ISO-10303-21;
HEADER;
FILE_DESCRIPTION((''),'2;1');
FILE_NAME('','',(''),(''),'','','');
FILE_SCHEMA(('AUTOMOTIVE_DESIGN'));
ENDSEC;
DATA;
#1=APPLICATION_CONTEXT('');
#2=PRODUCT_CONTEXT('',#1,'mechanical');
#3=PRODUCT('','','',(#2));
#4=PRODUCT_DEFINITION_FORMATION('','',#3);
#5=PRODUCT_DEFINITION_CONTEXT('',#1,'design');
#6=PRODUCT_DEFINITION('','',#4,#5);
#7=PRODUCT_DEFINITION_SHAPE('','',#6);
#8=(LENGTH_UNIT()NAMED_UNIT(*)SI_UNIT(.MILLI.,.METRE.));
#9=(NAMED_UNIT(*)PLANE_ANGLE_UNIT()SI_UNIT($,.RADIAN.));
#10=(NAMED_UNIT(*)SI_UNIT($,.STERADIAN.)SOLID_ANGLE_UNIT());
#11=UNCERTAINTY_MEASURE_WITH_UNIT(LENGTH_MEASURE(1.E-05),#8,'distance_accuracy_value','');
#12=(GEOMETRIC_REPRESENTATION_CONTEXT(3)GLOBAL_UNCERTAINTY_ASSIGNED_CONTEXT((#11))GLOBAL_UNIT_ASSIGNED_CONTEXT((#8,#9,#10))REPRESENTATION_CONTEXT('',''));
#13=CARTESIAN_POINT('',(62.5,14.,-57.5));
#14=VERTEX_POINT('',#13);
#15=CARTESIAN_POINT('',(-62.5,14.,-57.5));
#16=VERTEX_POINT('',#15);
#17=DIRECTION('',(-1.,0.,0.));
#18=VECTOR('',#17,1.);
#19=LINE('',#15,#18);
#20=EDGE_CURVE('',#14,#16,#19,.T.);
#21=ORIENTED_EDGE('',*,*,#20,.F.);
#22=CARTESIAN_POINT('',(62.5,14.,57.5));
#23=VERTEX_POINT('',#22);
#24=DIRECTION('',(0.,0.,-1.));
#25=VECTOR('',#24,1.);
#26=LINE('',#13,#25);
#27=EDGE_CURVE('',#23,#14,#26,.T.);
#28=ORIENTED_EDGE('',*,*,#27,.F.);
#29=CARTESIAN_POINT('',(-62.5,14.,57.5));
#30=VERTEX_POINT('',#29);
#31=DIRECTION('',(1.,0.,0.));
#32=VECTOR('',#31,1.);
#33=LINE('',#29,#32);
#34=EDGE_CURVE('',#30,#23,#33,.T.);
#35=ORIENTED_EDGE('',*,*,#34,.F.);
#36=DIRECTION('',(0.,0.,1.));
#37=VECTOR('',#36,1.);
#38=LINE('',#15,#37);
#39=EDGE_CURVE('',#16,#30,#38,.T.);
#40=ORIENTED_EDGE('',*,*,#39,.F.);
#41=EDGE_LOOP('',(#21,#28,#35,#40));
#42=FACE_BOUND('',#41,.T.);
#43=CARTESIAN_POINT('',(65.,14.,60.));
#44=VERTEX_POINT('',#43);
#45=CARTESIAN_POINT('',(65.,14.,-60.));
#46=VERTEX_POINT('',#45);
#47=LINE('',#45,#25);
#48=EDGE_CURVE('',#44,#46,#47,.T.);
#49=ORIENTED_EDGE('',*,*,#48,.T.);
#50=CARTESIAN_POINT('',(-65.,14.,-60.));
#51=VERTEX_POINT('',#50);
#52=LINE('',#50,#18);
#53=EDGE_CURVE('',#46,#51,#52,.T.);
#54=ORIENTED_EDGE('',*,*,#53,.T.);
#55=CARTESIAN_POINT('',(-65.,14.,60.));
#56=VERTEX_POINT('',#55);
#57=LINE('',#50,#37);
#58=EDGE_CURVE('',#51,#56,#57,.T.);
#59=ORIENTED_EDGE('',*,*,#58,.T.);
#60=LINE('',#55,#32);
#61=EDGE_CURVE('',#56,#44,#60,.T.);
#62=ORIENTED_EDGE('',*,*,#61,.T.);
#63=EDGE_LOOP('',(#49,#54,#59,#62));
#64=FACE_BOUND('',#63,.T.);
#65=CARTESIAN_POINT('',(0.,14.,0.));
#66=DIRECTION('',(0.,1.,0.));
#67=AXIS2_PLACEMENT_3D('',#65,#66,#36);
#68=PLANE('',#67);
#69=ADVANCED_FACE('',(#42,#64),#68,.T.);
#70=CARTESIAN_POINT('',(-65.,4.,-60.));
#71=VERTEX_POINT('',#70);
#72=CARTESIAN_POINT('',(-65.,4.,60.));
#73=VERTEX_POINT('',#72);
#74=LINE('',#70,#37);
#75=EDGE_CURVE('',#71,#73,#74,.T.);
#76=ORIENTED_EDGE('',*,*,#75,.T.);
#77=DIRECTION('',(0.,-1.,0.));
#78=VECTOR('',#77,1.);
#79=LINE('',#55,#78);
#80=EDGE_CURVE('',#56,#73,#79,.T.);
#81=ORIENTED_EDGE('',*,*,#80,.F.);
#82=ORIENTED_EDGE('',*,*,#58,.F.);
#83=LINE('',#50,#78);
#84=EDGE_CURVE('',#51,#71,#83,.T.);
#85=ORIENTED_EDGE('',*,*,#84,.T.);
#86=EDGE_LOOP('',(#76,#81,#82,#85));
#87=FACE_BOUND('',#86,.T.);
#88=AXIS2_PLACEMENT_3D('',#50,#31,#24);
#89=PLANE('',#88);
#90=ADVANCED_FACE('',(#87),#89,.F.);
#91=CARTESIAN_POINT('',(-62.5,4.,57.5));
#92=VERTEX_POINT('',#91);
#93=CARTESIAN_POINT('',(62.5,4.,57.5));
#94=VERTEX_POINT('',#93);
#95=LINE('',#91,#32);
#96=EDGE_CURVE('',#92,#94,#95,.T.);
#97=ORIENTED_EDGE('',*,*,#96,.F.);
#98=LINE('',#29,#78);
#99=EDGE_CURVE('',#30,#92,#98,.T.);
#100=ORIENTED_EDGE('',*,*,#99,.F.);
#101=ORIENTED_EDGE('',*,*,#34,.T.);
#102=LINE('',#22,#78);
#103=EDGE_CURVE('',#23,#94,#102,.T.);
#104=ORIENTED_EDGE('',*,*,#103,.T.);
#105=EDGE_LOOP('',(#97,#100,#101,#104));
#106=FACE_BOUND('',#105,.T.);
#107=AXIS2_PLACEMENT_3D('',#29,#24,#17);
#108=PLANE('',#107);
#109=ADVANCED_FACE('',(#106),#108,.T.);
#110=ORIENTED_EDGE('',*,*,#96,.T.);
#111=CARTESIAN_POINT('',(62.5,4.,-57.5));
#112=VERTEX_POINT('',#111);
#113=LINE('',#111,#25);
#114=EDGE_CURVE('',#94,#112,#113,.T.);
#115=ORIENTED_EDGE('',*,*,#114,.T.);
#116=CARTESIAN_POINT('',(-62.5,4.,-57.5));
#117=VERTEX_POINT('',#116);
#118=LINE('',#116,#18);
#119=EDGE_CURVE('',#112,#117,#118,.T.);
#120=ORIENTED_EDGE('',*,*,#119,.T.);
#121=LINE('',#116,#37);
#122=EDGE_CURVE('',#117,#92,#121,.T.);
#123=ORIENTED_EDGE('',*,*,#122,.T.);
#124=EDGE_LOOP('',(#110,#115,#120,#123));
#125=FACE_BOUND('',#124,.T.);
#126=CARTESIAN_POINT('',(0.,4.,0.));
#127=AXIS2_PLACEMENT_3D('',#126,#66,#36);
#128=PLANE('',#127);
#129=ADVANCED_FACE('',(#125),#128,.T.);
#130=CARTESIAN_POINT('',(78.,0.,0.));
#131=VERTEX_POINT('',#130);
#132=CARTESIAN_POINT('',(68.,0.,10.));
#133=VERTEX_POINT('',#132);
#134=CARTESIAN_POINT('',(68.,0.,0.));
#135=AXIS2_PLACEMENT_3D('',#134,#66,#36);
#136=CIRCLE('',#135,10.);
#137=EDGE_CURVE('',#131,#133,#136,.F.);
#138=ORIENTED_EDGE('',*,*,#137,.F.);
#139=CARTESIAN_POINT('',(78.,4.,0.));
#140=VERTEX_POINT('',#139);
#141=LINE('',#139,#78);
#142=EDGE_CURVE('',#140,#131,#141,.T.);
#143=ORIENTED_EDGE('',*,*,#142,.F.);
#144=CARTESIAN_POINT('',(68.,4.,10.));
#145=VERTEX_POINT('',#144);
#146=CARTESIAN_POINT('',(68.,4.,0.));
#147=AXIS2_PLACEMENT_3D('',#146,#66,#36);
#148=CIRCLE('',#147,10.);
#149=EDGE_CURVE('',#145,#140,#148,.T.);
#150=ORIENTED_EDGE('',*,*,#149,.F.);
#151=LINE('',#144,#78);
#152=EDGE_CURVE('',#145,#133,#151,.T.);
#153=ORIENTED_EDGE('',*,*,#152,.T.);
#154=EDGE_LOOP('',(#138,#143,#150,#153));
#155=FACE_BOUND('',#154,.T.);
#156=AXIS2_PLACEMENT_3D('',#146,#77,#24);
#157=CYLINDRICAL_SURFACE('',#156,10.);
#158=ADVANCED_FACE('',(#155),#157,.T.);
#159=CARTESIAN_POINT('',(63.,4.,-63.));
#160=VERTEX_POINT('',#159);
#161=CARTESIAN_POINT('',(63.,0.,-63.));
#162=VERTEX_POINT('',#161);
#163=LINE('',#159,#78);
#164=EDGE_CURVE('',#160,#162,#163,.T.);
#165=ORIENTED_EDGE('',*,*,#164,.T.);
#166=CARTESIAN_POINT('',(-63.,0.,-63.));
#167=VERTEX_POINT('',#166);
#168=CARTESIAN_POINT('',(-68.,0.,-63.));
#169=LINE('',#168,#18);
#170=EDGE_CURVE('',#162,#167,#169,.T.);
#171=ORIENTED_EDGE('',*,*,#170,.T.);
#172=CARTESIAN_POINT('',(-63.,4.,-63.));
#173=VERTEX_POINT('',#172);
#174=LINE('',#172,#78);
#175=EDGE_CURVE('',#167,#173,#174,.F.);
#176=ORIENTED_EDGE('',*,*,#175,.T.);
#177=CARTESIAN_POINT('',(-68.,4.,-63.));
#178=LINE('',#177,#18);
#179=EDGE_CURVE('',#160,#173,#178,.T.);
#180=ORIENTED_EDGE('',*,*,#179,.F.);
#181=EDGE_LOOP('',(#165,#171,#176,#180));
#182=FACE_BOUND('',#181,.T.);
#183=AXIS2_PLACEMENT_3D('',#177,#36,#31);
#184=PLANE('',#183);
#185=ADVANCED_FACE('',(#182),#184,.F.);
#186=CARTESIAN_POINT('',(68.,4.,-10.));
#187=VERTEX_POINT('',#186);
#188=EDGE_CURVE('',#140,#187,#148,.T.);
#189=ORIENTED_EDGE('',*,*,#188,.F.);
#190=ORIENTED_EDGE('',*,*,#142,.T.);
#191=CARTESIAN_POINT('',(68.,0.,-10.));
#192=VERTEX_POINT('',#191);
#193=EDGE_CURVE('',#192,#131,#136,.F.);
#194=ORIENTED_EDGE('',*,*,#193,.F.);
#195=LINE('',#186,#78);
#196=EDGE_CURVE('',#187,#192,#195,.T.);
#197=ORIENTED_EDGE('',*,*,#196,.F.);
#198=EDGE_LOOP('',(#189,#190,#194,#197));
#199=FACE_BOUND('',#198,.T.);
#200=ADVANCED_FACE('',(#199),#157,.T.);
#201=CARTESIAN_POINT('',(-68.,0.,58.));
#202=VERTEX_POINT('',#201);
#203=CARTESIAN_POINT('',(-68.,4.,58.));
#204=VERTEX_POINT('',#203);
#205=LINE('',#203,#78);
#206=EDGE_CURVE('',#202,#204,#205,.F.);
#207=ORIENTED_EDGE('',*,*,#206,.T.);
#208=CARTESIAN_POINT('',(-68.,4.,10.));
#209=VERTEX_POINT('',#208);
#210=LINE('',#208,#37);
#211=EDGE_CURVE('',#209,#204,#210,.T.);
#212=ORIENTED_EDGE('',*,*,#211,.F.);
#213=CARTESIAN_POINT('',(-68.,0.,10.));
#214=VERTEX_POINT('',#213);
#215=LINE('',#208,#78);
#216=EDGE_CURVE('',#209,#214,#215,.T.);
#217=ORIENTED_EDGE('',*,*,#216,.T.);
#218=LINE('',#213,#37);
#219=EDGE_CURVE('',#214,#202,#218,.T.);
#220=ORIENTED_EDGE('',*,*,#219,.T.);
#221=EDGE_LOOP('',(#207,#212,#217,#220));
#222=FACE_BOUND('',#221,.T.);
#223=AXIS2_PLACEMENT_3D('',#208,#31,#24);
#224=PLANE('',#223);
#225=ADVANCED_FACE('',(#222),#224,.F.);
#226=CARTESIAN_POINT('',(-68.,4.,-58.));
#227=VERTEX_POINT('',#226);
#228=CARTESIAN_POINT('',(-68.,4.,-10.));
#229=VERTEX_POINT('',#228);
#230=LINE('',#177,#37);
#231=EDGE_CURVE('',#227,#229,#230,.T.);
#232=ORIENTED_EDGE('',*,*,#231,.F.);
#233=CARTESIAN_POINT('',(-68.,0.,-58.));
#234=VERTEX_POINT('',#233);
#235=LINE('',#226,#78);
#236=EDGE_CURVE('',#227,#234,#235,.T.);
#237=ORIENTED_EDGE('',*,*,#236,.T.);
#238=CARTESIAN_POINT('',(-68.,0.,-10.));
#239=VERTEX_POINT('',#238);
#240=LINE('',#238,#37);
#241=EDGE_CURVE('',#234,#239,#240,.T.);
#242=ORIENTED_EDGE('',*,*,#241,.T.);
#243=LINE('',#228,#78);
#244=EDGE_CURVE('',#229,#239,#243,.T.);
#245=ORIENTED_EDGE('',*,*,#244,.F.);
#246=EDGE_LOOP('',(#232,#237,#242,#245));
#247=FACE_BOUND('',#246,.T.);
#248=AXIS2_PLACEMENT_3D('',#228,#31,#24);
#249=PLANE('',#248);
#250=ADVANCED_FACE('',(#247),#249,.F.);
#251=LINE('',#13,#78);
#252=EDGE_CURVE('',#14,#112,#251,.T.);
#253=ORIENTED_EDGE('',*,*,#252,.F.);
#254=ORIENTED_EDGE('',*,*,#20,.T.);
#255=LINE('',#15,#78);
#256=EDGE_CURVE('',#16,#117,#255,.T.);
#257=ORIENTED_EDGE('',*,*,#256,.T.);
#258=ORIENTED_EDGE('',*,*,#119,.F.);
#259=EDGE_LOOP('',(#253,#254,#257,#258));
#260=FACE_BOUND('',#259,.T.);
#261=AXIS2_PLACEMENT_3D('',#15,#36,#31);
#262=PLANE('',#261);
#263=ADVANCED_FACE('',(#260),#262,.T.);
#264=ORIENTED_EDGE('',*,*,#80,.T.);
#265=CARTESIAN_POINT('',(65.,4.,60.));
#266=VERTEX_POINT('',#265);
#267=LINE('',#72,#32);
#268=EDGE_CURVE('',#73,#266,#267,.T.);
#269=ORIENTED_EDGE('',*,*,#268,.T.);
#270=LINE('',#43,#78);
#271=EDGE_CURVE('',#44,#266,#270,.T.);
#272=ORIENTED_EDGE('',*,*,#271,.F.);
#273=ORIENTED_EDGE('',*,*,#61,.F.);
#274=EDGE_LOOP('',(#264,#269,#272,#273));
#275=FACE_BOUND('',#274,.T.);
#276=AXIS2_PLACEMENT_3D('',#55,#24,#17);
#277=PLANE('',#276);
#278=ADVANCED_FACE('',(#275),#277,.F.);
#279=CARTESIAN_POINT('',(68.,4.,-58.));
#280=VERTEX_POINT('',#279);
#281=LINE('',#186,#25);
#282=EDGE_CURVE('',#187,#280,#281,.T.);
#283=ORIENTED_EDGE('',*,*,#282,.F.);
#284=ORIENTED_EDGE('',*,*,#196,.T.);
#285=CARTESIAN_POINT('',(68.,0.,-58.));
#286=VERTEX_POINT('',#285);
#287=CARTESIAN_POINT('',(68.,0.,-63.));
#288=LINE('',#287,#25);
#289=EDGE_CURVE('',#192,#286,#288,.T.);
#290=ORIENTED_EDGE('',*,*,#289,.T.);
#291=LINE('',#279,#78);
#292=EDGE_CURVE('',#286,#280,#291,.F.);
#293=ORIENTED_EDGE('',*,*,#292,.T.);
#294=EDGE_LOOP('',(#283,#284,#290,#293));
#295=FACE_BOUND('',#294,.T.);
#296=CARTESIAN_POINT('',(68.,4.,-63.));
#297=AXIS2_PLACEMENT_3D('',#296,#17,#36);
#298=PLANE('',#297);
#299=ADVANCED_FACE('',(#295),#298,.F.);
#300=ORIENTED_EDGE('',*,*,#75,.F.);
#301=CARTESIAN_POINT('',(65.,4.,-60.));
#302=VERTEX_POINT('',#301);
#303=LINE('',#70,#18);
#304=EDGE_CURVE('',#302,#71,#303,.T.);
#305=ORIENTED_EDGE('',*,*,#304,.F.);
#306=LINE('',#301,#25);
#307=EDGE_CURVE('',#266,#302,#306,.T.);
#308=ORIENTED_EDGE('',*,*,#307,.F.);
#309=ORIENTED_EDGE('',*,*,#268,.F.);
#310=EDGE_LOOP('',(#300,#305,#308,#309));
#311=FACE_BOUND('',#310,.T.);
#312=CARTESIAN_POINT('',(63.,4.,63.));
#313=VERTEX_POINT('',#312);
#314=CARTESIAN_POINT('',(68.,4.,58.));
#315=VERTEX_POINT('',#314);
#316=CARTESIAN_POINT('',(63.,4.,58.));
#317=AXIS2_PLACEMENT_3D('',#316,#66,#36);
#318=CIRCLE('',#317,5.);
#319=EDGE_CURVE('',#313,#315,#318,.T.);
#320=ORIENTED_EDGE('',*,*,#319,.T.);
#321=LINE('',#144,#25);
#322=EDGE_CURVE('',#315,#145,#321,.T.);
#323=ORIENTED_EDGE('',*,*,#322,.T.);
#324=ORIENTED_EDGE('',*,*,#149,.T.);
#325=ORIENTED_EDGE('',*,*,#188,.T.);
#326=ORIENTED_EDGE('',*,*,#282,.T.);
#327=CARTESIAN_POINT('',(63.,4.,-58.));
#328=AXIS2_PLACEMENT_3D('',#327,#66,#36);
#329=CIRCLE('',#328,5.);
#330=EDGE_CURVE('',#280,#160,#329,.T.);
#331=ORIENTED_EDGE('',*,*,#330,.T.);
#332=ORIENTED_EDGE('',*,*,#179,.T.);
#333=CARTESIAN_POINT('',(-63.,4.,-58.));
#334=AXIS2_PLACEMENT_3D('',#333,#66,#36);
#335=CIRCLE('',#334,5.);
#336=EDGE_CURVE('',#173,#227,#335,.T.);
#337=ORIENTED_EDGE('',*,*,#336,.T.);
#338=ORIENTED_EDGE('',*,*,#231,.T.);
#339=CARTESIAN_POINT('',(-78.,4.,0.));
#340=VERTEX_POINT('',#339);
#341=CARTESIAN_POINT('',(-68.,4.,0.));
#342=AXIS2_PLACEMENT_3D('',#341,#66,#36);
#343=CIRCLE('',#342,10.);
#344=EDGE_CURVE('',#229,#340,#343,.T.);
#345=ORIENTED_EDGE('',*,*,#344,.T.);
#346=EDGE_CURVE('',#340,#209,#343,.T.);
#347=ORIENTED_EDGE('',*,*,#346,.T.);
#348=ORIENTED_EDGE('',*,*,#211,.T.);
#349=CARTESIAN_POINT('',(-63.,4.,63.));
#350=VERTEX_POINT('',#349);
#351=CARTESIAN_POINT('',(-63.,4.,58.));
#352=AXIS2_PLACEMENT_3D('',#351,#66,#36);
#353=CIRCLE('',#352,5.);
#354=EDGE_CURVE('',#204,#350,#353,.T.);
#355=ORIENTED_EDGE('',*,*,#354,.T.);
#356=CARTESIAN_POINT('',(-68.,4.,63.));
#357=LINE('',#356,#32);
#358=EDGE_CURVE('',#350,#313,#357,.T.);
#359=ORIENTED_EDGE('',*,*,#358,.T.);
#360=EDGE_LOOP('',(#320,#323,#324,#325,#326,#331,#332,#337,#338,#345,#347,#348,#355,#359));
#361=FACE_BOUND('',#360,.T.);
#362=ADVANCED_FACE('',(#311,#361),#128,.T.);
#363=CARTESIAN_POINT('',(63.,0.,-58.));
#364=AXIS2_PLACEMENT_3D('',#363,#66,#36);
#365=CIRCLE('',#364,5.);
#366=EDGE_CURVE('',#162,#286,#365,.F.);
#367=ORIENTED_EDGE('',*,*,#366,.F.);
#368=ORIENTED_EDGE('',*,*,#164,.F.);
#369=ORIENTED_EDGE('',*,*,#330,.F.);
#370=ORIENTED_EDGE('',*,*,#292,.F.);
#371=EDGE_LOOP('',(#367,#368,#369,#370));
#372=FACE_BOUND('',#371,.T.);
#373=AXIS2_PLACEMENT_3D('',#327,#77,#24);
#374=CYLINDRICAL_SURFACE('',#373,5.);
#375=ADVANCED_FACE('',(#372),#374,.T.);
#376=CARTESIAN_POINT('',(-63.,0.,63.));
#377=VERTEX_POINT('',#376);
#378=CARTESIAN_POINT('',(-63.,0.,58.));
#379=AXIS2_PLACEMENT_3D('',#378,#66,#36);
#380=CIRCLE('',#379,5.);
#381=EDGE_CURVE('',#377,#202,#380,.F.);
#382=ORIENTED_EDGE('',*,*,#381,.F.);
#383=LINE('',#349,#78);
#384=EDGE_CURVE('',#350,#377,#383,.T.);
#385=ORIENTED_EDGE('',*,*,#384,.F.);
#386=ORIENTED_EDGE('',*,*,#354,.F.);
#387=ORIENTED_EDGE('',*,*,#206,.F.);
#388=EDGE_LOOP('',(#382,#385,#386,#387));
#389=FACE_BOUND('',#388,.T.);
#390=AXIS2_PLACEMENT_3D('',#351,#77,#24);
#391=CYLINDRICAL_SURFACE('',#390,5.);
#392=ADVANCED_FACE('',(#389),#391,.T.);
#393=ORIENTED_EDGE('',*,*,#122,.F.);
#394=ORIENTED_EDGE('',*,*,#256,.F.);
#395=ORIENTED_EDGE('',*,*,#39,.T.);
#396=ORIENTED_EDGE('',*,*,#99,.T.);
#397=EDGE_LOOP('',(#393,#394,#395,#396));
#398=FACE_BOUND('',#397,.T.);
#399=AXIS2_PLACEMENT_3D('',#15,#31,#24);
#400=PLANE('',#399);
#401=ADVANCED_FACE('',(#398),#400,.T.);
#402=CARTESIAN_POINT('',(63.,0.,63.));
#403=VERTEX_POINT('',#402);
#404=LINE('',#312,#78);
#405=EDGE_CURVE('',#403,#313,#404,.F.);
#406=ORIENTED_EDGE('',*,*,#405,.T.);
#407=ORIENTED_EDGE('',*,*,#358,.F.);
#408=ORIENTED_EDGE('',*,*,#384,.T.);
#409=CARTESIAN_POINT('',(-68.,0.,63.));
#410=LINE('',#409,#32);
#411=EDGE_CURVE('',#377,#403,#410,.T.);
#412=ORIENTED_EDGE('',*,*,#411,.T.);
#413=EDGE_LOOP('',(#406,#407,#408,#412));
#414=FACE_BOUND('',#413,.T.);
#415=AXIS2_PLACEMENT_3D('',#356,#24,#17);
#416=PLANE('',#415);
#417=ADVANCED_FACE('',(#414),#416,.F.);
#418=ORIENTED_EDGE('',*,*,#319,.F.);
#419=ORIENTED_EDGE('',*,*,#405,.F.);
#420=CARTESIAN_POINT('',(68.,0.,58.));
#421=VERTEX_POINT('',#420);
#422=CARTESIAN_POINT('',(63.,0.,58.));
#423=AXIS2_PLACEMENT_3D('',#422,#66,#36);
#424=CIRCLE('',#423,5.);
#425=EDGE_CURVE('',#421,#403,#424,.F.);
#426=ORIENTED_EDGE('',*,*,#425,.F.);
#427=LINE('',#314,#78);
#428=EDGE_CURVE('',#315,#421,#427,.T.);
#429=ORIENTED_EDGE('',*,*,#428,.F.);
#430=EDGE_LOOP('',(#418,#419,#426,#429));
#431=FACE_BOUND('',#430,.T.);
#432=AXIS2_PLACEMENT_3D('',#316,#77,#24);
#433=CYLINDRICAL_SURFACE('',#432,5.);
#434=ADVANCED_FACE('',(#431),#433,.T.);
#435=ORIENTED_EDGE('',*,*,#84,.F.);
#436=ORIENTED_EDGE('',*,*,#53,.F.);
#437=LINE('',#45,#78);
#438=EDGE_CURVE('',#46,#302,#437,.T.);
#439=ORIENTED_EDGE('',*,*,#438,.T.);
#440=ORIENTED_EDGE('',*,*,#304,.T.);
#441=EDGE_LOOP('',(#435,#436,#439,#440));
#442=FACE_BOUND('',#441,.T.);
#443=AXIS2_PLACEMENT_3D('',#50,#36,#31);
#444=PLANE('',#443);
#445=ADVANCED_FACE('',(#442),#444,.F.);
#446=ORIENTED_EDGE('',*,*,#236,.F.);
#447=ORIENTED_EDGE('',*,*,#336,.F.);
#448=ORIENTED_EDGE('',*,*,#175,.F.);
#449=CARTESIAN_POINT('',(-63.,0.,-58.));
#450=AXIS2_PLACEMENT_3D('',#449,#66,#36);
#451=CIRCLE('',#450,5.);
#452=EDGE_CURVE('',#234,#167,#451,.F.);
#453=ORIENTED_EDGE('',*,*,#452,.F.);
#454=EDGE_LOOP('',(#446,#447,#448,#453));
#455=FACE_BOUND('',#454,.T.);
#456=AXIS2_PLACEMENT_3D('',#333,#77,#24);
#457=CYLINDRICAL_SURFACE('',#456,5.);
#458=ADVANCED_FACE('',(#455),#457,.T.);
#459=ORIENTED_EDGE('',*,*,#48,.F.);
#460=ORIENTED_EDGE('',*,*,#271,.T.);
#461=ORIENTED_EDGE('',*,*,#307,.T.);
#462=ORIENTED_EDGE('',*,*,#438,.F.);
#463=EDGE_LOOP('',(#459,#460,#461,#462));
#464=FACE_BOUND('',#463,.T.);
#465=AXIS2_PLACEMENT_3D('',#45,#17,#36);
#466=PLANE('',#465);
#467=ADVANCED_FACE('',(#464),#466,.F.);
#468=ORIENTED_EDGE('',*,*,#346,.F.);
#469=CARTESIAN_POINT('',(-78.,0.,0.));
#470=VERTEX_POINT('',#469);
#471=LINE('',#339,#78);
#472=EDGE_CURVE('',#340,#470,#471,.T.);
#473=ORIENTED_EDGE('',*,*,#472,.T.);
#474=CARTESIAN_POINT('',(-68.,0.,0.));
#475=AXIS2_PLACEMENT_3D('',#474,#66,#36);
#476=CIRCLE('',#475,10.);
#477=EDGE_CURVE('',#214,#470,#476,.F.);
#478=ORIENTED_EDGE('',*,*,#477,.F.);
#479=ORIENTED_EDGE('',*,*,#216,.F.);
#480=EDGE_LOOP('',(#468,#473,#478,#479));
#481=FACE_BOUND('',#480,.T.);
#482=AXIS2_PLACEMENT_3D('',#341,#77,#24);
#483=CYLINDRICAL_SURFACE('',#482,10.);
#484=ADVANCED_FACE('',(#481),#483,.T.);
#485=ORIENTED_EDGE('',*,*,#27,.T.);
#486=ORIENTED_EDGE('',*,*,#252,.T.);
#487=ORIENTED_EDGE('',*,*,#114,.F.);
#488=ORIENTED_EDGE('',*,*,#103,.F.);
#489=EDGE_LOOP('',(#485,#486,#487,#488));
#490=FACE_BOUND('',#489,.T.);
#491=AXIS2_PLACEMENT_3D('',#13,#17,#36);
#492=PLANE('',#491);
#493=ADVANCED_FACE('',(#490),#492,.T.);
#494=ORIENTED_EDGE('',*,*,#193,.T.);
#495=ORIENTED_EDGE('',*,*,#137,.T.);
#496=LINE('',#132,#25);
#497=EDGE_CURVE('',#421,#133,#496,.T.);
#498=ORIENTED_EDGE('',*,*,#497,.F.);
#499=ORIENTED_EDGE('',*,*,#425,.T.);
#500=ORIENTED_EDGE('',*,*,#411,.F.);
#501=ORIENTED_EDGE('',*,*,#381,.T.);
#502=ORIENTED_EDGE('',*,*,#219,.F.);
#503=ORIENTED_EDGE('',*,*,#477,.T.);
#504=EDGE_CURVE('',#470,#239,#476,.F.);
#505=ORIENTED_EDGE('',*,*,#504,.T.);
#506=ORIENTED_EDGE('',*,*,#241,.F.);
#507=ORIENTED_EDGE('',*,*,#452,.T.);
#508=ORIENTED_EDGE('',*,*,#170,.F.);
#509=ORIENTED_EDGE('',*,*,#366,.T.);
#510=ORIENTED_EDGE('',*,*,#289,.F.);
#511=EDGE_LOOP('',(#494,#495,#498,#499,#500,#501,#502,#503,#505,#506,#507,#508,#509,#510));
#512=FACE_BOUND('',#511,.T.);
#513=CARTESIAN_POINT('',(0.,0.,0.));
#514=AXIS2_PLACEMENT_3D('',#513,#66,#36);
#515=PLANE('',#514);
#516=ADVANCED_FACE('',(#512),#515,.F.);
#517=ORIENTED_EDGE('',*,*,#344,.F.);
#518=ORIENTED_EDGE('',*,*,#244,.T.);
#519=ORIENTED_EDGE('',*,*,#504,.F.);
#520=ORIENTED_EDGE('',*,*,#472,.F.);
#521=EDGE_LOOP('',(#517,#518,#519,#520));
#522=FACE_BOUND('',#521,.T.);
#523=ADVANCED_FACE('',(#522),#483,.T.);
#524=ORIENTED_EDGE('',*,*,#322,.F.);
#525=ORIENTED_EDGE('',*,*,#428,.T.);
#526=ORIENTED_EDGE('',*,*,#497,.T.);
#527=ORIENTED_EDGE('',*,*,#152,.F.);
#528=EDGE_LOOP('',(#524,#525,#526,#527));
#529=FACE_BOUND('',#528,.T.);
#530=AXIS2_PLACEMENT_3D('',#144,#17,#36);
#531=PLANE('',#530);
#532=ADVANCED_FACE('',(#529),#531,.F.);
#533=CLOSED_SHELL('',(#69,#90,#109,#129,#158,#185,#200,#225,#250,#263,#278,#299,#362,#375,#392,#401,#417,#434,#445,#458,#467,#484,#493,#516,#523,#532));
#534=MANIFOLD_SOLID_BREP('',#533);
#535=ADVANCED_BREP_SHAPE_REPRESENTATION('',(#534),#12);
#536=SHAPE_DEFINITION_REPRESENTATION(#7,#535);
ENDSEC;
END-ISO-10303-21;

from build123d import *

# Parameters (mm, degrees)
BOSS_EXTRUDE1_DEPTH = 4
SKETCH3_W           = 130
SKETCH3_H           = 120
SKETCH3_W_2         = 125
SKETCH3_H_2         = 115
BOSS_EXTRUDE2_DEPTH = 10
FILLET1_R           = 5
FILLET2_R           = 10


with BuildPart() as part:
    # Sketch1 → Boss-Extrude1 (new body)
    with BuildSketch(Plane(origin=(0, 0, 0), x_dir=(1, 0, 0), z_dir=(0, 1, 0))):
        Polygon((-68, 63), (68, 63), (68, 39.979206653), (68, 10), (78, 10), (78, -10), (68, -10), (68, -63), (-68, -63), (-68, -10), (-78, -10), (-78, 10), (-68, 10), (-68, 39.979206653), align=None)
    extrude(amount=BOSS_EXTRUDE1_DEPTH)

    # Sketch3 → Boss-Extrude2 (add)
    with BuildSketch(Plane(origin=(0, 4, 0), x_dir=(1, 0, 0), z_dir=(0, 1, 0))):
        Rectangle(SKETCH3_W, SKETCH3_H)
        Rectangle(SKETCH3_W_2, SKETCH3_H_2, mode=Mode.SUBTRACT)
    extrude(amount=BOSS_EXTRUDE2_DEPTH)

    # Fillet1
    fillet1_edges = [part.edges().sort_by_distance(p)[0] for p in [
        (68, 2, 63),
        (-68, 2, 63),
        (-68, 2, -63),
        (68, 2, -63),
    ]]
    fillet(fillet1_edges, radius=FILLET1_R)

    # Fillet2
    fillet2_edges = [part.edges().sort_by_distance(p)[0] for p in [
        (78, 2, -10),
        (78, 2, 10),
        (-78, 2, 10),
        (-78, 2, -10),
    ]]
    fillet(fillet2_edges, radius=FILLET2_R - 0.0001)  # a hair under: the kernel refuses the full size


solid = part.part
